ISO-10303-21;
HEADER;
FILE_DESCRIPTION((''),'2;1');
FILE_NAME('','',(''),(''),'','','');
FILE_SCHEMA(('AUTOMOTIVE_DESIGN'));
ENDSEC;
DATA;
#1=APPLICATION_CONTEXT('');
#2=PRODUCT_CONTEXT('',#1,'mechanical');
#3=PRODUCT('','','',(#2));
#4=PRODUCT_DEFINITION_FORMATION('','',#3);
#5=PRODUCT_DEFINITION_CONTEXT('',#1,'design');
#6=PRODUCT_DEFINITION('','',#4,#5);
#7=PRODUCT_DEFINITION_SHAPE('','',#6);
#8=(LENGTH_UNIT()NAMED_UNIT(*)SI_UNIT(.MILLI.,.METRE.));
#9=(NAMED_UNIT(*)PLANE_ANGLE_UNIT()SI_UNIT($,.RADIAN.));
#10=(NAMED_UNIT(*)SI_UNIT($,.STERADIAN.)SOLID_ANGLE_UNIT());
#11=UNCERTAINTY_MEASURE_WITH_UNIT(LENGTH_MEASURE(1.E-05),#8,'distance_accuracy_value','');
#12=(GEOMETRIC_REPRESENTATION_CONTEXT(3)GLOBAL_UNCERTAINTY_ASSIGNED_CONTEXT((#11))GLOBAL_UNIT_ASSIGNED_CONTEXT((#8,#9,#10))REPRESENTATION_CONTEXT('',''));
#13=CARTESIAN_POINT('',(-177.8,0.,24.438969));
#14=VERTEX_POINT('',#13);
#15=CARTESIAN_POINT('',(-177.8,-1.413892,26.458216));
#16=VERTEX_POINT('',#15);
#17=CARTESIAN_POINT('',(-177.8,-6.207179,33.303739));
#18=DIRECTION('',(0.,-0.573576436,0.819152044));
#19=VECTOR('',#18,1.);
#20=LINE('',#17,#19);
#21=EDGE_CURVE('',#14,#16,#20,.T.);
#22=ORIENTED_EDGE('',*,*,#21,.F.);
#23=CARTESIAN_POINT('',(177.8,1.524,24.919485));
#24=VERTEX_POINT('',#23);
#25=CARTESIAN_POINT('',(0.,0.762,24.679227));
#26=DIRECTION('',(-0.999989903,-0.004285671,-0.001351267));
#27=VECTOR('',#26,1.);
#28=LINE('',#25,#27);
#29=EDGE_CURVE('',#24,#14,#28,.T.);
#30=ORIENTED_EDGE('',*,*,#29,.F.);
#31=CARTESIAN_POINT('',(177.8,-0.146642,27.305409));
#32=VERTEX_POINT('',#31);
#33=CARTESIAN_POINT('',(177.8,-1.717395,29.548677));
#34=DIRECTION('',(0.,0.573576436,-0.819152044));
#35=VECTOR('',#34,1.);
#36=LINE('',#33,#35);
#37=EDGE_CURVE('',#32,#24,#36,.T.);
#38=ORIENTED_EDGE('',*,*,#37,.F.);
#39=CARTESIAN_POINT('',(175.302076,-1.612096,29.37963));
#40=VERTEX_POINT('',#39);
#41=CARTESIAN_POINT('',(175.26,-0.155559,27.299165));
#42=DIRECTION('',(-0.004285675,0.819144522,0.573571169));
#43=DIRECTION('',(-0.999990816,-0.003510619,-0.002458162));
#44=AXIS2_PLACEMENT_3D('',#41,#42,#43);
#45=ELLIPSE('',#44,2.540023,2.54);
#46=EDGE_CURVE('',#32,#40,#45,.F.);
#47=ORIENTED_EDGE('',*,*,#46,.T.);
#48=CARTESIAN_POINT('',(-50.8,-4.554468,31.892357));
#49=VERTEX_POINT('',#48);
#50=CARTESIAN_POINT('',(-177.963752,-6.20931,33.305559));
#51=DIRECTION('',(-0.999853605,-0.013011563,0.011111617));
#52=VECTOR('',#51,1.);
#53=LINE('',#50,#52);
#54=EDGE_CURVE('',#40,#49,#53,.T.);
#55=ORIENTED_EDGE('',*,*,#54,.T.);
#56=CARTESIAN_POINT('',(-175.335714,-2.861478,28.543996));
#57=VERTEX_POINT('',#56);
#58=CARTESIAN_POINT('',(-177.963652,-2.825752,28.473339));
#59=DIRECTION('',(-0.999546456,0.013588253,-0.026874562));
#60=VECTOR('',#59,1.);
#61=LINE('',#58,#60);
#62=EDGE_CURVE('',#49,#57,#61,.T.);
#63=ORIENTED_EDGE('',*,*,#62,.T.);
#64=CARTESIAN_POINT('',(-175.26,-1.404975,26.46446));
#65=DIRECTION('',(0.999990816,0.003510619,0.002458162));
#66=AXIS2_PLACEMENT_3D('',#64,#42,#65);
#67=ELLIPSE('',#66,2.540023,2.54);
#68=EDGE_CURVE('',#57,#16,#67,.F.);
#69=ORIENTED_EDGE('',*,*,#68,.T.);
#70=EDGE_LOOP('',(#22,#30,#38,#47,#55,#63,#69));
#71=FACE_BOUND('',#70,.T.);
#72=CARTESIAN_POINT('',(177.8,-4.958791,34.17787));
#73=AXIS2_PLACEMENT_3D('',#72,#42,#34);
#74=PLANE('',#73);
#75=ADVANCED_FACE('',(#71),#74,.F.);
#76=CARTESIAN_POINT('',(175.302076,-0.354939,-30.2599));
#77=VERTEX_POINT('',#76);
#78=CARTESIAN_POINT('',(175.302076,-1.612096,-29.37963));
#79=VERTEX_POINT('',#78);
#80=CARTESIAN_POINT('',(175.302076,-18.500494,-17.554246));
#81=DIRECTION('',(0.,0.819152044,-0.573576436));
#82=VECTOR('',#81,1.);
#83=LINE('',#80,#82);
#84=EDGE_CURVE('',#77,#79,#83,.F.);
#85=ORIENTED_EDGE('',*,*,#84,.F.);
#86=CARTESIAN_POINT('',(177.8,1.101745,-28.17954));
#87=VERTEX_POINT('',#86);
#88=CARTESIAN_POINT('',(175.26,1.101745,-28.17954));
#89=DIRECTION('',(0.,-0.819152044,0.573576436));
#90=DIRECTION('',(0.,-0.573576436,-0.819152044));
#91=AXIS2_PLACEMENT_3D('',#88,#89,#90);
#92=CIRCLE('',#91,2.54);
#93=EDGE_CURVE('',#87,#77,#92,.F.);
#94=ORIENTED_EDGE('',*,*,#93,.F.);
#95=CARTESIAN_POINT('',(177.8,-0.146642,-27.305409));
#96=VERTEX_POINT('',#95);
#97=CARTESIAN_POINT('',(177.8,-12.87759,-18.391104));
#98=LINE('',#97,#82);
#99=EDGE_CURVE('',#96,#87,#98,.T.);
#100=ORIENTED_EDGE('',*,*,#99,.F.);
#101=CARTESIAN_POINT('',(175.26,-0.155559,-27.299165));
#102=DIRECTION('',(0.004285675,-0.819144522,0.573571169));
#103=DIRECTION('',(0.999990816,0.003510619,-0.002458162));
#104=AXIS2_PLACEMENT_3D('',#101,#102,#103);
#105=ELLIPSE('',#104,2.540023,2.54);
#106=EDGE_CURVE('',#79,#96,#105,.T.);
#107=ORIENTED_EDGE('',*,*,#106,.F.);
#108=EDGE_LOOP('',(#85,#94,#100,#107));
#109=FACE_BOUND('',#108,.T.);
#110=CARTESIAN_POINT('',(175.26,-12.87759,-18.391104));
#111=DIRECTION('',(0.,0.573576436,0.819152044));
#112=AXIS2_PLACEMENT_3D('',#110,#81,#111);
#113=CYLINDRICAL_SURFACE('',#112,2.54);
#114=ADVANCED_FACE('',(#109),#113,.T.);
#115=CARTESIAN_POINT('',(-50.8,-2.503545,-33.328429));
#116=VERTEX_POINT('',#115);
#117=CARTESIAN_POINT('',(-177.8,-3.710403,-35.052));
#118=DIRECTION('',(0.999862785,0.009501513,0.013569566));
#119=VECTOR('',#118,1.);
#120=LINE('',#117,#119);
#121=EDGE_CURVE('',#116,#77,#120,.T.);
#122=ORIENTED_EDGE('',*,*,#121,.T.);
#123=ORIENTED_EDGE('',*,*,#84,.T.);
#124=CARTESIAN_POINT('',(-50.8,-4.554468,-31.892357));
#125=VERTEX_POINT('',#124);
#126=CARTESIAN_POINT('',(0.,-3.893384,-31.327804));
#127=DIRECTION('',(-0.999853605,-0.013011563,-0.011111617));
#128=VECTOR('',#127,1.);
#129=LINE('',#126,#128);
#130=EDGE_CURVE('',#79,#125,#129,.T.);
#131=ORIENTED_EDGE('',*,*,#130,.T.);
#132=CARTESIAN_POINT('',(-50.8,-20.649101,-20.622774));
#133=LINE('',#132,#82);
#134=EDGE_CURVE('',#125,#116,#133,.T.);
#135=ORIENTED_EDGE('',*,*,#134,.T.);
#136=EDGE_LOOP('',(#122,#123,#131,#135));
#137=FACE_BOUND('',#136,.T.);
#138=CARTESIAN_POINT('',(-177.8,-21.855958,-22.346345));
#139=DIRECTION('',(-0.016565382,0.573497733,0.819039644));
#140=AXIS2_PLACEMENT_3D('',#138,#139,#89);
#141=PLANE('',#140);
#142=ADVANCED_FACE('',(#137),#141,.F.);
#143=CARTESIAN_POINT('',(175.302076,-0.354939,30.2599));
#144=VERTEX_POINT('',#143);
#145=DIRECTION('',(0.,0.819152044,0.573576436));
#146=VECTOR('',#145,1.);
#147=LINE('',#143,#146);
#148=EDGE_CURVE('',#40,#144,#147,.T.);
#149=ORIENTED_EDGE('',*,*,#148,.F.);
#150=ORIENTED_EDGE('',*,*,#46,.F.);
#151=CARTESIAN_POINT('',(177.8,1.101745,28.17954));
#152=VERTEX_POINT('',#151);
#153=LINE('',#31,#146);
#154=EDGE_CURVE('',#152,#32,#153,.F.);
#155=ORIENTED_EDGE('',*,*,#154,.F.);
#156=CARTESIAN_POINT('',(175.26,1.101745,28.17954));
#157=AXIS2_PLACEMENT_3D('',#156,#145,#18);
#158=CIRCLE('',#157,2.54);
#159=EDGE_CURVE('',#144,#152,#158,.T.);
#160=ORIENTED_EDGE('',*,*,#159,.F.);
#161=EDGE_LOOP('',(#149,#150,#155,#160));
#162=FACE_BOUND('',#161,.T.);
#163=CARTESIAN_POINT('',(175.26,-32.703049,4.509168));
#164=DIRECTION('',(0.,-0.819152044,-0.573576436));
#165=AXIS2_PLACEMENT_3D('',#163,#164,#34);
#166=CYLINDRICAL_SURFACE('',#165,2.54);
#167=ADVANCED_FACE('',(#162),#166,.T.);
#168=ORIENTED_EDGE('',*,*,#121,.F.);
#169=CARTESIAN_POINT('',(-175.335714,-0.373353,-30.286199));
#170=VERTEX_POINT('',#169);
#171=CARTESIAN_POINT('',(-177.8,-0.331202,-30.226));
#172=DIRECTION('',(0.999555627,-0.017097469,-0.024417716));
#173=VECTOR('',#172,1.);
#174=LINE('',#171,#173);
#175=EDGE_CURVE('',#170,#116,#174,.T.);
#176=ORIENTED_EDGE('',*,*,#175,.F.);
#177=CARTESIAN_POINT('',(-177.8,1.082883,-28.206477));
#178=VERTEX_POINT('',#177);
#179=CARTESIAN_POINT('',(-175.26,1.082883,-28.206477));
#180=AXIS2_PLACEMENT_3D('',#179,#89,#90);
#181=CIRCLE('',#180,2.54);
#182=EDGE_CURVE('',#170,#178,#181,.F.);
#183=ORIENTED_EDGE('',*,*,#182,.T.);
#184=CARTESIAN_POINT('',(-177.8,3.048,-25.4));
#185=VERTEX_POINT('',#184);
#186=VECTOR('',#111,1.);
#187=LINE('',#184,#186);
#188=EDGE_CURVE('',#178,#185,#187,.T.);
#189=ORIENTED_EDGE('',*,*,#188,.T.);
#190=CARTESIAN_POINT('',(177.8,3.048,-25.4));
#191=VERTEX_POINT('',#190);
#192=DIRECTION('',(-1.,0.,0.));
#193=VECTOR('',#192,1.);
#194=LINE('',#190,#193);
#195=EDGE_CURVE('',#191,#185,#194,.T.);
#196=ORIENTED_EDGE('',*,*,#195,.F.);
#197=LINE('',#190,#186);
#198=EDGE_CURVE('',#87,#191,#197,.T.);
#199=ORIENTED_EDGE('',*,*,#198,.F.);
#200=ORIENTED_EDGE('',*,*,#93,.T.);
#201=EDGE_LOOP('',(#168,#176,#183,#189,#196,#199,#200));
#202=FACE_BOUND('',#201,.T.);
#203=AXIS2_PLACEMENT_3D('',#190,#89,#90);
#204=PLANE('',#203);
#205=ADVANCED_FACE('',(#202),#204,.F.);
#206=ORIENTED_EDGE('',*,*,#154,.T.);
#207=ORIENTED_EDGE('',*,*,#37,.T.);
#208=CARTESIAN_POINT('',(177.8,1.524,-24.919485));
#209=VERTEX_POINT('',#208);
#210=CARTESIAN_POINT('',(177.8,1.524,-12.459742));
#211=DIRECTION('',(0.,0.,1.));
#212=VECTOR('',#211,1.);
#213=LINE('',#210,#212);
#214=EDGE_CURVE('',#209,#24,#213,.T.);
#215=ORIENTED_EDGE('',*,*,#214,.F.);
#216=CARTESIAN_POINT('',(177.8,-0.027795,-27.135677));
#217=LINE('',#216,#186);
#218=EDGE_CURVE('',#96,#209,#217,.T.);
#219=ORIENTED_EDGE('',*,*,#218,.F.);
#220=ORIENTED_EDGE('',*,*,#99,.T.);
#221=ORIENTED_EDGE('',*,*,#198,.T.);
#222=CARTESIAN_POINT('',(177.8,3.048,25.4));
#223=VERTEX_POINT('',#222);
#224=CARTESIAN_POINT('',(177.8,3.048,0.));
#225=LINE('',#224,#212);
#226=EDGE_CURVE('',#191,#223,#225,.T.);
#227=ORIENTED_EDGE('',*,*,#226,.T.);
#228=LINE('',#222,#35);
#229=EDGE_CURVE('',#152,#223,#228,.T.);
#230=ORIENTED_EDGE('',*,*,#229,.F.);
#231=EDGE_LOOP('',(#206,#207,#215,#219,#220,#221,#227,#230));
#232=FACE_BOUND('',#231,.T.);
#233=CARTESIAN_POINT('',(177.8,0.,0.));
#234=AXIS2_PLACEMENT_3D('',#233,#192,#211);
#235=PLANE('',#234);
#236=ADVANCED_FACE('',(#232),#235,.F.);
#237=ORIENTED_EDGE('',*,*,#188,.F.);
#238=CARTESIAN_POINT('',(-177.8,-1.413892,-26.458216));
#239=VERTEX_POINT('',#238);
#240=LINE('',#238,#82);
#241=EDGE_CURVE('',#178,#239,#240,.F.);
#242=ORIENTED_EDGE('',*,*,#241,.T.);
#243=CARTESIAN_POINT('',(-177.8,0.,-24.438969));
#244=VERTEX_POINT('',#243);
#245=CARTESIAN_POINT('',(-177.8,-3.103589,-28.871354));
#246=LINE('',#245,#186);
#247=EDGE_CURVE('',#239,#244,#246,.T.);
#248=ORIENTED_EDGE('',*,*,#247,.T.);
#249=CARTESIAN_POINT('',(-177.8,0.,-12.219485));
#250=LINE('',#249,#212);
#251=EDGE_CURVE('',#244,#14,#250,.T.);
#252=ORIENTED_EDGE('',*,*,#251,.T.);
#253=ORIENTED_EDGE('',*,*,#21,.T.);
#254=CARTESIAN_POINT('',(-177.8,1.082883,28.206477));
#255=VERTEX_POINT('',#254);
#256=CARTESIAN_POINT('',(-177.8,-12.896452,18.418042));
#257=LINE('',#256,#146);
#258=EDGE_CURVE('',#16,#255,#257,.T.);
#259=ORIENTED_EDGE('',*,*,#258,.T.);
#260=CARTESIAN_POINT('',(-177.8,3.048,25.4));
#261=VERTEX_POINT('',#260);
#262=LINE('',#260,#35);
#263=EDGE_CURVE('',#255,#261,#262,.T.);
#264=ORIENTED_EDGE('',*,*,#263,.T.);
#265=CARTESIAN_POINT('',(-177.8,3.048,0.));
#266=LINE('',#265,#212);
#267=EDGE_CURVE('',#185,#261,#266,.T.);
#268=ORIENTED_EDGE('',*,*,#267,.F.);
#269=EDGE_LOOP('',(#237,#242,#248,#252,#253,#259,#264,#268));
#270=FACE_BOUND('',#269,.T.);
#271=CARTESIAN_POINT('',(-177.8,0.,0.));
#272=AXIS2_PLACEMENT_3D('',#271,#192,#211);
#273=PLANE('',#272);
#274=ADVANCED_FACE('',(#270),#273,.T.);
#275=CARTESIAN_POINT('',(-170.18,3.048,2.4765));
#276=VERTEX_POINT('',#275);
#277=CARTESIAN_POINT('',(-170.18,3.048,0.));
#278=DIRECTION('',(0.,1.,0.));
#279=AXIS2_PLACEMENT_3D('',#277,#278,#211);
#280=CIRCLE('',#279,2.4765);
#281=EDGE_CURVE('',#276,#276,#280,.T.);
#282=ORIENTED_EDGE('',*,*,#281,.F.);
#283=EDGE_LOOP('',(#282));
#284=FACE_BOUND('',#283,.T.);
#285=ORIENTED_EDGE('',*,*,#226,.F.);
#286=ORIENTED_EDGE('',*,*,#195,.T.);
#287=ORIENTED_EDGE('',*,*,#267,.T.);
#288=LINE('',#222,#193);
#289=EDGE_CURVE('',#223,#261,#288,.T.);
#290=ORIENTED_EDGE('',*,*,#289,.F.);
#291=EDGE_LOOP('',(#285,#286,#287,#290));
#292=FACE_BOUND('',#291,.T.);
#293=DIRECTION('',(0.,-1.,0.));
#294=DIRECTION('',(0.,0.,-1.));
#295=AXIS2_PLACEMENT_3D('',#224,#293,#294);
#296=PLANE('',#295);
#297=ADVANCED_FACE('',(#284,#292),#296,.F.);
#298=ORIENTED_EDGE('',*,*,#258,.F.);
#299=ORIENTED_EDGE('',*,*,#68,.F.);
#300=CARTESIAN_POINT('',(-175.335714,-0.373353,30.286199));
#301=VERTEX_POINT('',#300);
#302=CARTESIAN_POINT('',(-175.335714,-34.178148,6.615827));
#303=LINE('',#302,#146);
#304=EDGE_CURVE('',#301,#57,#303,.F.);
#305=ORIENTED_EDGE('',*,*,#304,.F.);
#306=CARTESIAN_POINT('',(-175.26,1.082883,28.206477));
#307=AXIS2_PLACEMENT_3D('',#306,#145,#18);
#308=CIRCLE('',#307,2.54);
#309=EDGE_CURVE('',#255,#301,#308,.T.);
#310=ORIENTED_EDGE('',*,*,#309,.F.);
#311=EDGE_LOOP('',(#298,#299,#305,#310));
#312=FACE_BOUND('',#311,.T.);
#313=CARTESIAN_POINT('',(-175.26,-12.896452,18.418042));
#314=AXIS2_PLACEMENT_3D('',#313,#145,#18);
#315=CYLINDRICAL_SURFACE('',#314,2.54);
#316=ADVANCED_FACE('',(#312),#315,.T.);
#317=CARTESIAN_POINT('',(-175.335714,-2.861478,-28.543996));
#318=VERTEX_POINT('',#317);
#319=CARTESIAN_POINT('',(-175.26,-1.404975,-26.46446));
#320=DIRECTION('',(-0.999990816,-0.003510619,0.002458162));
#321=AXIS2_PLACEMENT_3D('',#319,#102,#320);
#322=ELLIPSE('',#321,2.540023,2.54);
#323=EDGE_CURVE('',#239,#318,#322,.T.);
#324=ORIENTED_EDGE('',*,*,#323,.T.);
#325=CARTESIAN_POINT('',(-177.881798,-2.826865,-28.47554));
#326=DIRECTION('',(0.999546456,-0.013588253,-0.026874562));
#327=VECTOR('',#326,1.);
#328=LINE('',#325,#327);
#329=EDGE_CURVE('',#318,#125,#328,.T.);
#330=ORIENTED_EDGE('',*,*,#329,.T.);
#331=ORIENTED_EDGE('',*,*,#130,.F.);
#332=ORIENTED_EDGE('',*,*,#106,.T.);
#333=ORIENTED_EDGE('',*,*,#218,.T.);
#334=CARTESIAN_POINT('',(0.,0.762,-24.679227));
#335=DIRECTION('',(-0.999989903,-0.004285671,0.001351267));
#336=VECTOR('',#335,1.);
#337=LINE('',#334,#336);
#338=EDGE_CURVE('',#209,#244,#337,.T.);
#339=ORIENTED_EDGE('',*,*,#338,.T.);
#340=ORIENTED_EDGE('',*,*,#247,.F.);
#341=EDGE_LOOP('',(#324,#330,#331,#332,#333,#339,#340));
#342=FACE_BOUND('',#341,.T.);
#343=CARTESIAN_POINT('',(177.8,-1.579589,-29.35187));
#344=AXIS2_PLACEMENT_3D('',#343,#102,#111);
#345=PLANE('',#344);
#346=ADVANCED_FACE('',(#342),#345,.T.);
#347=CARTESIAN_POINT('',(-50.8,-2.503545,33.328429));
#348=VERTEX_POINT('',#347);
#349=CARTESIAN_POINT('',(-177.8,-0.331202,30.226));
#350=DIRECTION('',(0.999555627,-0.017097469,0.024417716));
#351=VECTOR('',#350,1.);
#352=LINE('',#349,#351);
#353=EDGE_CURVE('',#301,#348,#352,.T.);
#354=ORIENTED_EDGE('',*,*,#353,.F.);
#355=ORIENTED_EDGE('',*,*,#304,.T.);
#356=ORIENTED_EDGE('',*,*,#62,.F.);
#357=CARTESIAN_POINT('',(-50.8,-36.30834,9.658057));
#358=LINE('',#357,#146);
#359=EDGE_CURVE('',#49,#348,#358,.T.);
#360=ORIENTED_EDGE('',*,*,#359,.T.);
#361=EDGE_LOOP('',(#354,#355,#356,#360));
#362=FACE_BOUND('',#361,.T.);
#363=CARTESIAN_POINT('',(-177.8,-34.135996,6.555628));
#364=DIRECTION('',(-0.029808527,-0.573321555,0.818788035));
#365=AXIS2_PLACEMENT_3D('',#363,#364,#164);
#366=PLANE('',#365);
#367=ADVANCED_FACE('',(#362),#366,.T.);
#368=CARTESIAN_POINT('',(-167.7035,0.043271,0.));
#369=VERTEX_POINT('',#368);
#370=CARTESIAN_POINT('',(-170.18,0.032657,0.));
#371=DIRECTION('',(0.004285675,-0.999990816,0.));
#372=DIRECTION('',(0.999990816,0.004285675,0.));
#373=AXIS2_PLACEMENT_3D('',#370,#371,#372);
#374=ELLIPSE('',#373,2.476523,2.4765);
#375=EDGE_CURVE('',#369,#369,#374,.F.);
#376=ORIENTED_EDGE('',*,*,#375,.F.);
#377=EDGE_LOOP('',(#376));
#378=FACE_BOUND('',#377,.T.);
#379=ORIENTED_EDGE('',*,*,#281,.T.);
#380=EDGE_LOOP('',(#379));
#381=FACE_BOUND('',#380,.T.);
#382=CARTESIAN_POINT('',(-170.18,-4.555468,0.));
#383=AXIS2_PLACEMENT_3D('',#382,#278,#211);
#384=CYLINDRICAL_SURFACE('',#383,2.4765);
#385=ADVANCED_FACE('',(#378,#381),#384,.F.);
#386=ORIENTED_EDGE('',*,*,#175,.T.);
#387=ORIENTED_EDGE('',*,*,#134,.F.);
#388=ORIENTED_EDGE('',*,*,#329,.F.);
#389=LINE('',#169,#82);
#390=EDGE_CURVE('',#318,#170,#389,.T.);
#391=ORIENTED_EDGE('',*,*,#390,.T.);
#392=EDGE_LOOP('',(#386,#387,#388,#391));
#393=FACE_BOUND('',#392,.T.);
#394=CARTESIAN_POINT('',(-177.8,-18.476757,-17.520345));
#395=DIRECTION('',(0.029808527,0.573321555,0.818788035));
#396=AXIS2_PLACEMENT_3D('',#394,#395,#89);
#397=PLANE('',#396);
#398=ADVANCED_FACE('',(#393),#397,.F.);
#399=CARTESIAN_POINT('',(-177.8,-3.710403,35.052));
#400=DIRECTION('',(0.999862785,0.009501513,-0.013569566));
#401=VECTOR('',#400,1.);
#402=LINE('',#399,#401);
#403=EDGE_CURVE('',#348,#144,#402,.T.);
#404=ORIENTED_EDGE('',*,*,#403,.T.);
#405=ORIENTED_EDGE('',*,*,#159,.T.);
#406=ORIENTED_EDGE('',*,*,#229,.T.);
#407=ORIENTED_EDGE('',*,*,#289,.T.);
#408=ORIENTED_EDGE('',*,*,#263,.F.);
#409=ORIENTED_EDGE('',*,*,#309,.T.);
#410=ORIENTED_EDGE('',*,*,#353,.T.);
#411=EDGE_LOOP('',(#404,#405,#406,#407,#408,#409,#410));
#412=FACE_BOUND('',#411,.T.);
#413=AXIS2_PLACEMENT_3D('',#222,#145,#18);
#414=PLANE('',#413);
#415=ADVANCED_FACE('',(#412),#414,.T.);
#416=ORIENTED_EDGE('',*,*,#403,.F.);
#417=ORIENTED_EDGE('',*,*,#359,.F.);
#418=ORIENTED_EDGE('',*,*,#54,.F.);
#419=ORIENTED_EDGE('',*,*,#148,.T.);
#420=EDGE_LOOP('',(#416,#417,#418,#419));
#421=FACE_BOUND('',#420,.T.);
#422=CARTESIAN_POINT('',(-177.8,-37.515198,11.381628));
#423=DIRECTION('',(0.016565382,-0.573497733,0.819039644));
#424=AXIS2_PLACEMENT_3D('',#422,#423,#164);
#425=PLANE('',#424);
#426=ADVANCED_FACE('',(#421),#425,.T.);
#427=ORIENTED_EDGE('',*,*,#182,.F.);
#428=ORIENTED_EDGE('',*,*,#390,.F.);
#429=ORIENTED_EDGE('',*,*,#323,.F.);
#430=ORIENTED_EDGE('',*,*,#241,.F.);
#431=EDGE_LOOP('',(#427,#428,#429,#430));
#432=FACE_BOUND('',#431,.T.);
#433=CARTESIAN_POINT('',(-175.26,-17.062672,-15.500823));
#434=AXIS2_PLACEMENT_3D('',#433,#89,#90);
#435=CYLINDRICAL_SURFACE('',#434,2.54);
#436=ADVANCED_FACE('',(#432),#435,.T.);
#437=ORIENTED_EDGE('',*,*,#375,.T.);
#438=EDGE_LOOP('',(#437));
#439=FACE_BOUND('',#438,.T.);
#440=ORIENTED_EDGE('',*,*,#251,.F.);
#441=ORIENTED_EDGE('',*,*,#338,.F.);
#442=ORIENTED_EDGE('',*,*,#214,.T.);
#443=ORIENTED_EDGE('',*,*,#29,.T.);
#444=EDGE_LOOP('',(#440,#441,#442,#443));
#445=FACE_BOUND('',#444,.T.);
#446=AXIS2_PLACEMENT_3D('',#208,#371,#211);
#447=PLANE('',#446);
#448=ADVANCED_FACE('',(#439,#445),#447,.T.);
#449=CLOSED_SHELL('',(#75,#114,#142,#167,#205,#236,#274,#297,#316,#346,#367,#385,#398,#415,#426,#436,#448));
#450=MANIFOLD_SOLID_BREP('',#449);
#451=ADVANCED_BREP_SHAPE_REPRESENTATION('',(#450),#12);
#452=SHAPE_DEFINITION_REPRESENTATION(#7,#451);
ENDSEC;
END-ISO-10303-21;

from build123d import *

# Parameters (mm, degrees)
BOSS_EXTRUDE1_DEPTH = 177.8
CUT_EXTRUDE2_REACH  = 182.717
CUT_LOFT2_DEPTH     = 6.207121586
CUT_LOFT2_DRAFT     = -55.0003318
CUT_EXTRUDE4_REACH  = 182.717
CUT_LOFT3_START     = -177.779804528
CUT_LOFT3_DEPTH     = 355.618213607
FILLET7_R           = 2.54
FILLET8_R           = 2.54
CUT_EXTRUDE5_REACH  = 183.056
SKETCH19_R          = 2.4765


# Read off the part's stored shape, not the designer's step: Cut-Loft2, Cut-Loft3
with BuildPart() as part:
    # Sketch1 → Boss-Extrude1 (new, symmetric)
    with BuildSketch(Plane(origin=(0, 0, 0), x_dir=(0, 0, -1), z_dir=(1, 0, 0))):
        Polygon((0, 3.048), (25.4, 3.048), (35.052, -3.710403159), (33.303739022, -6.20717859), (24.438969291, 0), (0, 0), align=None)
    boss_extrude1 = extrude(amount=BOSS_EXTRUDE1_DEPTH, both=True)

    # Sketch4 → Cut-Extrude2 (cut, up to next)
    with BuildSketch(Plane(origin=(0, 13.979334982, -9.788435734), x_dir=(1, 0, 0), z_dir=(0, 0.8191520442889915, -0.5735764363510467)), mode=Mode.PRIVATE) as cut_extrude2_sk1:
        Polygon((-177.8, 30.841117278), (177.8, 24.949659112), (177.8, 30.841117278), align=None)
    cut_extrude2_tool1 = extrude(cut_extrude2_sk1.sketch, amount=-CUT_EXTRUDE2_REACH, mode=Mode.PRIVATE) & part.part
    cut_extrude2 = cut_extrude2_tool1.solids().sort_by_distance((59.266667, -2.584003, -33.443333))[0]
    add(cut_extrude2, mode=Mode.SUBTRACT)


with BuildPart() as cut_loft2_tool:
    # Cut-Loft2 outline → Cut-Loft2 (with draft: the straight prism first)
    with BuildSketch(Plane(origin=(-0.003265654, 0.761986004, 0), x_dir=(0.9999908164530384, 0.0042856749276558815, 0), z_dir=(0.0042856749276558815, -0.9999908164530384, 0))):
        Polygon((177.804898534, -24.919484646), (177.804898534, 0), (-177.798367166, 0), (-177.798367166, -24.438969291), align=None)
    extrude(amount=CUT_LOFT2_DEPTH)
    # Cut-Loft2: the draft: its side faces are tilted about the plane it starts from
    cut_loft2_sides = [cut_loft2_tool.faces().sort_by_distance(p)[0] for p in [
        (177.813300853, -1.579532292, -12.459742323),
        (0.013300853, -2.341532292, 0),
        (-177.786699148, -3.103532292, -12.219484645),
        (0.013300853, -2.341532292, -24.679226969),
    ]]
    draft(cut_loft2_sides, Plane(origin=(-0.003265654, 0.761986004, 0), x_dir=(0.9999908164530384, 0.0042856749276558815, 0), z_dir=(0.0042856749276558815, -0.9999908164530384, 0)), CUT_LOFT2_DRAFT)


with BuildPart() as part_1:
    add(part.part)

    # Cut-Loft2: cut by cut_loft2_tool
    add(cut_loft2_tool.part, mode=Mode.SUBTRACT)

    # Cut-Extrude4: up to this plane
    cut_extrude4_end = Plane(origin=(177.8, -1.579589295, -29.351869511), z_dir=(0.00428567492765589, -0.819144521567724, 0.5735711688849072))
    # Sketch12 → Cut-Extrude4 (cut, up to the surface)
    with BuildSketch(Plane(origin=(0, 13.979334982, -9.788435734), x_dir=(1, 0, 0), z_dir=(0, 0.8191520442889914, -0.5735764363510467)), mode=Mode.PRIVATE) as cut_extrude4_sk1:
        Polygon((-177.8, 30.841117278), (-50.8, 28.737025076), (-177.8, 24.949659112), align=None)
    cut_extrude4_tool1 = split(extrude(cut_extrude4_sk1.sketch, amount=-CUT_EXTRUDE4_REACH, mode=Mode.PRIVATE), bisect_by=cut_extrude4_end, keep=Keep.BOTH, mode=Mode.PRIVATE)
    cut_extrude4 = cut_extrude4_tool1.solids().sort_by_distance((-135.466667, -2.181717, -32.86881))[0]
    add(cut_extrude4, mode=Mode.SUBTRACT)

    # Mirror20: Boss-Extrude1 across plane
    add(boss_extrude1.mirror(Plane.XY))

    # Cut-Loft3 outline → Cut-Loft3 (cut)
    with BuildSketch(Plane(origin=(0, 0, 0), x_dir=(-0.004285667102275099, 0.999990816469807, -5.791138486653598e-06), z_dir=(0.9999899034999146, 0.0042856710149996365, 0.0013512668805631468)).offset(CUT_LOFT3_START)):
        Polygon((0.762004584, -2), (0.761850081, 24.679204437), (-5.720934875, 33.93758085), (-6.464848773, 35), (-8, 35), (-8, -2), align=None)
    extrude(amount=CUT_LOFT3_DEPTH, mode=Mode.SUBTRACT)

    # Mirror21: Cut-Extrude4 across plane
    add(cut_extrude4.mirror(Plane.XY), mode=Mode.SUBTRACT)

    # Mirror22: Cut-Extrude2 across plane
    add(cut_extrude2.mirror(Plane.XY), mode=Mode.SUBTRACT)

    # Fillet7
    fillet7_edges = [part_1.edges().sort_by_distance(p)[0] for p in [
        (-177.8, -1.579589295, -29.351869511),
        (-177.8, -1.579589295, 29.351869511),
    ]]
    fillet(fillet7_edges, radius=FILLET7_R)

    # Fillet8
    fillet8_edges = [part_1.edges().sort_by_distance(p)[0] for p in [
        (177.8, -0.955395437, -29.788934755),
        (177.8, -0.955395437, 29.788934755),
    ]]
    fillet(fillet8_edges, radius=FILLET8_R)

    # Cut-Extrude5: up to this plane
    cut_extrude5_end = Plane(origin=(177.8, 1.524, -24.919484646), z_dir=(0.004285674927655877, -0.9999908164530384, 0))
    # Sketch19 → Cut-Extrude5 (cut, up to the surface)
    with BuildSketch(Plane(origin=(0, 3.048, 0), x_dir=(1, 0, 0), z_dir=(0, 1, 0)), mode=Mode.PRIVATE) as cut_extrude5_sk1:
        with Locations(Location((-170.18, 0, 0), (0, 0, 270))):
            Circle(SKETCH19_R)
    cut_extrude5_tool1 = split(extrude(cut_extrude5_sk1.sketch, amount=-CUT_EXTRUDE5_REACH, mode=Mode.PRIVATE), bisect_by=cut_extrude5_end, keep=Keep.BOTH, mode=Mode.PRIVATE)
    add(cut_extrude5_tool1.solids().sort_by_distance((-170.18, 3.048, 0))[0], mode=Mode.SUBTRACT)


solid = part_1.part
